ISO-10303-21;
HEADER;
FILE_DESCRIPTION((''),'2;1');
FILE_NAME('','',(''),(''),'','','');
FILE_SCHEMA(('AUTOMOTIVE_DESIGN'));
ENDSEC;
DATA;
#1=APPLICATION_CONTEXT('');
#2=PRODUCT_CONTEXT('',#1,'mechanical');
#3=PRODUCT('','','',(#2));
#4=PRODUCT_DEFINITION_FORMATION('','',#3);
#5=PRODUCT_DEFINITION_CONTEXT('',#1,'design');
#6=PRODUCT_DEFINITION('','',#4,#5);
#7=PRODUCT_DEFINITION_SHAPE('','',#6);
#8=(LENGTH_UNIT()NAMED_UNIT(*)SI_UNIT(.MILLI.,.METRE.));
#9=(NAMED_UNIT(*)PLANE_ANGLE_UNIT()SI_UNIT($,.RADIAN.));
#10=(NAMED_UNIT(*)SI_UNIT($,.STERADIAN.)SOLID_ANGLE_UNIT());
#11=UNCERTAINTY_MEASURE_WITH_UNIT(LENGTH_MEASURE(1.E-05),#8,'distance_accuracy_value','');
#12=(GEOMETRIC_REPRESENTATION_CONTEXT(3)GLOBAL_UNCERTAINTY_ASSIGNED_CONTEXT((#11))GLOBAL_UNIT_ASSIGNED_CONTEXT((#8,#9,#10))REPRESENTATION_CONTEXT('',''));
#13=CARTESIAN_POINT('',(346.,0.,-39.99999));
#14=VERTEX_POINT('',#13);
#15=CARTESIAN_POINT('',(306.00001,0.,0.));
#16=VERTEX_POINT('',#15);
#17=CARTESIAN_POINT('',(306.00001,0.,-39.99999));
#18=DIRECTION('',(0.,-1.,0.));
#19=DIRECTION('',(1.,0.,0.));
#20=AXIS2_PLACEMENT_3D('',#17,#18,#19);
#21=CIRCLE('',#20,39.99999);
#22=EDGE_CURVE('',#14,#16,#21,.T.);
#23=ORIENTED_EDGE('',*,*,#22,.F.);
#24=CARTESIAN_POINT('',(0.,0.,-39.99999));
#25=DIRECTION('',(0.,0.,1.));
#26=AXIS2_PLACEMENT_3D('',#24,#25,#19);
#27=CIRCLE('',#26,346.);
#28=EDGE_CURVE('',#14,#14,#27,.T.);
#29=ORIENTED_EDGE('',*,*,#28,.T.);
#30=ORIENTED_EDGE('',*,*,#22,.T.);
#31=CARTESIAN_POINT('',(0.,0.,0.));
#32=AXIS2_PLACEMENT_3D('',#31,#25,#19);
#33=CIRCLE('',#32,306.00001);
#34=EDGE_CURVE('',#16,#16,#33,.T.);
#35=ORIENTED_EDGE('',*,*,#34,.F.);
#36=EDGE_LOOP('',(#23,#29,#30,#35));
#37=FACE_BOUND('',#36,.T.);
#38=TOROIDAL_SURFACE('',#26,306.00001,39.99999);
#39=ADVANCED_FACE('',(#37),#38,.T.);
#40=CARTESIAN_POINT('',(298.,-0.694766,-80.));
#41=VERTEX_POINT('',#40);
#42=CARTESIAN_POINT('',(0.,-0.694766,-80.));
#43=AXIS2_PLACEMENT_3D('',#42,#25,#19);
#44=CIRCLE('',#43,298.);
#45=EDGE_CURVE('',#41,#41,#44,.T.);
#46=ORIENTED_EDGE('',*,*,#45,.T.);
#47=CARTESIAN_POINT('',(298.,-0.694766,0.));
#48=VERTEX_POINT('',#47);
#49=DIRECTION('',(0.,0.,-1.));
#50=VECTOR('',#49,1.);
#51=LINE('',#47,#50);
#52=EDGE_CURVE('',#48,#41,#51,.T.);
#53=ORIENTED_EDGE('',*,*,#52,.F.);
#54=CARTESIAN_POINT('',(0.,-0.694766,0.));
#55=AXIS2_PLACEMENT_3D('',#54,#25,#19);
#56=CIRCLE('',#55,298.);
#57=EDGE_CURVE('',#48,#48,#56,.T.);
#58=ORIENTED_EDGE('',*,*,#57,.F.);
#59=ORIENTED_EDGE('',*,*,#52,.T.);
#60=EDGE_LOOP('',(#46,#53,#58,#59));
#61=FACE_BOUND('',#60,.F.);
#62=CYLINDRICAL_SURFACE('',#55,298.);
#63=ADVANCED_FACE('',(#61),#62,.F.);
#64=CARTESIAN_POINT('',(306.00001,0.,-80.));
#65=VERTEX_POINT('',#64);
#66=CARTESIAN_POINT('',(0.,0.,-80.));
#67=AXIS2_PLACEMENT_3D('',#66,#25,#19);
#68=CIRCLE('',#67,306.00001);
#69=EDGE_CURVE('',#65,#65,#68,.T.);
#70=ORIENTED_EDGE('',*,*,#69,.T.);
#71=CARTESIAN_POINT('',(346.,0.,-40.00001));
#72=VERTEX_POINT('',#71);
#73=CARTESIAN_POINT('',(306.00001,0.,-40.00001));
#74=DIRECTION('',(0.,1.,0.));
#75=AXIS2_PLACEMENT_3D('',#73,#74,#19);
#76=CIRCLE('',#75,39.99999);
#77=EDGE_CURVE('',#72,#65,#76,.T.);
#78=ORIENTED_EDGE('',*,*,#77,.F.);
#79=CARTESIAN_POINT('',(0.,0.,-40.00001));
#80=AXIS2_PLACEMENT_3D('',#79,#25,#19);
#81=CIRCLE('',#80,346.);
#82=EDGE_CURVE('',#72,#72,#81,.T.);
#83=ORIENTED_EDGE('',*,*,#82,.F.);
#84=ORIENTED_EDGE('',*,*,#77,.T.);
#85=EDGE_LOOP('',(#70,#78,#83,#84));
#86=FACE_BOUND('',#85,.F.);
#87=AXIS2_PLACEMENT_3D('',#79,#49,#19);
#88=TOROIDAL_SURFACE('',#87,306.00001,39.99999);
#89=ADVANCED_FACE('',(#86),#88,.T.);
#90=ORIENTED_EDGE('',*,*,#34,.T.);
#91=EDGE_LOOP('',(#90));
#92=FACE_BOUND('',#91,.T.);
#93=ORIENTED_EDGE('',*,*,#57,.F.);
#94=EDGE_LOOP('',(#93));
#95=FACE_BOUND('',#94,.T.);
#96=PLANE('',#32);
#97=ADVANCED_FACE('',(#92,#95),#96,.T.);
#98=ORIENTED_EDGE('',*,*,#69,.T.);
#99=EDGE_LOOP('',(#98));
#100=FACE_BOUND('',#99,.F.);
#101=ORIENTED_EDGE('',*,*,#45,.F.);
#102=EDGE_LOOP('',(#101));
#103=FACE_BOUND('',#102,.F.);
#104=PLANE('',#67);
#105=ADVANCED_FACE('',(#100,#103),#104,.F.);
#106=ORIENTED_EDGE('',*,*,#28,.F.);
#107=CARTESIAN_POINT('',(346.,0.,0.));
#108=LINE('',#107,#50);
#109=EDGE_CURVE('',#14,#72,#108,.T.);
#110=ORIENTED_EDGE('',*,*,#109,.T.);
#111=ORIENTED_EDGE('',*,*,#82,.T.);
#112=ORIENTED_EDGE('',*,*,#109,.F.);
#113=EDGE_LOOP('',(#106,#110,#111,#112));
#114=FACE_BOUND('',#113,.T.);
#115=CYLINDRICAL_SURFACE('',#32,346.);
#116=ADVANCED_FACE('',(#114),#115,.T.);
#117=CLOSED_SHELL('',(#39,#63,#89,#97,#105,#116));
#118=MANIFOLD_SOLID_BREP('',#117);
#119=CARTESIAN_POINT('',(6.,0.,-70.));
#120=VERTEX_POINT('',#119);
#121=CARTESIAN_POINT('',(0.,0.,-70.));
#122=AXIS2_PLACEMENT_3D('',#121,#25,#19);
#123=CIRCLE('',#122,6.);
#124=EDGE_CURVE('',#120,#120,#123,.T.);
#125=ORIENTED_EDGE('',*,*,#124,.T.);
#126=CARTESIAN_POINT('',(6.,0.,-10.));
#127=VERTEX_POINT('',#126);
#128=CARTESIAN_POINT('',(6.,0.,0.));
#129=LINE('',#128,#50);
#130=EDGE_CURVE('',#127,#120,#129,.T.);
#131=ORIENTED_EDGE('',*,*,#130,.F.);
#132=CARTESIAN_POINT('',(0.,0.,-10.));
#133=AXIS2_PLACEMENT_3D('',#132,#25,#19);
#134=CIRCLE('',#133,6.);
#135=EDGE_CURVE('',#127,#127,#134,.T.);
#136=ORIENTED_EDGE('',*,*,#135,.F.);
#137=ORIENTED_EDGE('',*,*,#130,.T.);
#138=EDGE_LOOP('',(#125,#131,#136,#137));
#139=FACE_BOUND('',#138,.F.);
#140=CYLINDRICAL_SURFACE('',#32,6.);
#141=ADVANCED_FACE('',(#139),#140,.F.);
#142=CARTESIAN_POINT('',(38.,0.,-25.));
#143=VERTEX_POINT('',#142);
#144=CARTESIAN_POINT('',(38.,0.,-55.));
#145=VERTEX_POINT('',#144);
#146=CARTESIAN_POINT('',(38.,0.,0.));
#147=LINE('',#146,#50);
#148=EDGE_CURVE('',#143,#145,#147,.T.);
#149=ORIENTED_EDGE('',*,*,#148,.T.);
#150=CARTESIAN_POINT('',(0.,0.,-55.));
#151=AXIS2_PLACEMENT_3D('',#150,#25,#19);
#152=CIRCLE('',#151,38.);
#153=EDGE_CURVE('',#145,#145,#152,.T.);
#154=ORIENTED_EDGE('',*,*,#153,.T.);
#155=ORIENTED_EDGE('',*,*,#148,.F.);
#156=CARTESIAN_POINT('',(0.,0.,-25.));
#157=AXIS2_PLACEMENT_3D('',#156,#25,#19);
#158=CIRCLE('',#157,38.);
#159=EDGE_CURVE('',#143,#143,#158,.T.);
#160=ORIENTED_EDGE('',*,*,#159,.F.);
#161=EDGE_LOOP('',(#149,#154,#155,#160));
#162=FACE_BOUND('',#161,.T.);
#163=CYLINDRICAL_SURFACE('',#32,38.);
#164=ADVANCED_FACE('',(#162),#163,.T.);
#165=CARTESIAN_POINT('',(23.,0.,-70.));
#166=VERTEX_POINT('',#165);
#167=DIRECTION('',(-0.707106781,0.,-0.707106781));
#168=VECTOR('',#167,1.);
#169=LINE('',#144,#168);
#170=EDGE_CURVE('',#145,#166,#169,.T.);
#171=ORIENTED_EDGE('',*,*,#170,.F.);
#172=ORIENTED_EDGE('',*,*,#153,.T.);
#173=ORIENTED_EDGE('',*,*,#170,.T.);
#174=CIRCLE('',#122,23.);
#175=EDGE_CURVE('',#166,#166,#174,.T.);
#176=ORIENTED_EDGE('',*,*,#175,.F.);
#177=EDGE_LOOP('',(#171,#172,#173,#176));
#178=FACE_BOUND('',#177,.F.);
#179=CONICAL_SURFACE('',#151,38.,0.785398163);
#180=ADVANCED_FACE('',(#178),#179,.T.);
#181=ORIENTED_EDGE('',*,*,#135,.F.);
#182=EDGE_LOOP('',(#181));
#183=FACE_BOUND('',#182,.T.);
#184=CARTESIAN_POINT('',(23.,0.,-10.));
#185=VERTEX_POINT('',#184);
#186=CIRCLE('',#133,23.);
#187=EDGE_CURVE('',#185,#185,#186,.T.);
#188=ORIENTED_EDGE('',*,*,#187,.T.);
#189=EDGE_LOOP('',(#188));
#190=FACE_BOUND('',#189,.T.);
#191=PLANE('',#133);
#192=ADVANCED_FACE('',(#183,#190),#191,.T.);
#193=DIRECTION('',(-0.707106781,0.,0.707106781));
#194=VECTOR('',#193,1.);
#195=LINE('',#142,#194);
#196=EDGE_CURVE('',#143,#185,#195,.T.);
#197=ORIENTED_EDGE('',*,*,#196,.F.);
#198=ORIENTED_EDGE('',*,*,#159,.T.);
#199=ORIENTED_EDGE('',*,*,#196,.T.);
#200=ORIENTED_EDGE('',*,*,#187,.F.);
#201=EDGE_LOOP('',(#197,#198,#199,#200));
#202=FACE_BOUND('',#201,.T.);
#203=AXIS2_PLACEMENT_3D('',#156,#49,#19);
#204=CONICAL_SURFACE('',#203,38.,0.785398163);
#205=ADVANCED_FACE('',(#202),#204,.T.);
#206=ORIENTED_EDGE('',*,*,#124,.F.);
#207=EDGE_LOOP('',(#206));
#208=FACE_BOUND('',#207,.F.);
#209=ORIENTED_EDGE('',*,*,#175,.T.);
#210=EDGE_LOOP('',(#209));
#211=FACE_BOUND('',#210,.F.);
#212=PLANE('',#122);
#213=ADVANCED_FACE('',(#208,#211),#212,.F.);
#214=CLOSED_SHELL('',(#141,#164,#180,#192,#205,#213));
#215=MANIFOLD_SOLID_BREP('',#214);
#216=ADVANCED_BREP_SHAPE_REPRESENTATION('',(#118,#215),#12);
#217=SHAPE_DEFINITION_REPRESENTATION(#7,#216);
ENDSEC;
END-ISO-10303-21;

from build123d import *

# Parameters (mm, degrees)
F0_R     = 346
F0_R_2   = 298
F1_DEPTH = 80
F2_R     = 39.99999
F0_R_3   = 38
F0_R_4   = 6
F3_DEPTH = 70
F4_DEPTH = 10
F5_SIZE  = 15


# Not quite as in the source:
# - a fillet or chamfer is up to 0.001 mm smaller than in the source, because OpenCascade refuses the exact size


with BuildPart() as f1:
    # F0 (on Top) → F1 (new body)
    with BuildSketch(Plane.XY):
        Circle(F0_R)
        with Locations((0, -0.6947662914)):
            Circle(F0_R_2, mode=Mode.SUBTRACT)
    extrude(amount=-F1_DEPTH)

    # F2 (radius 40 in the source; OpenCascade refuses exactly that, so slightly less here)
    f2_edges = [f1.edges().sort_by_distance(p)[0] for p in [
        (-346, 0, 0),
        (-346, 0, -80),
    ]]
    fillet(f2_edges, radius=F2_R)


with BuildPart() as f3:
    # F0 (on Top) → F3 (new body)
    with BuildSketch(Plane.XY):
        Circle(F0_R_3)
        Circle(F0_R_4, mode=Mode.SUBTRACT)
    extrude(amount=-F3_DEPTH)

    # F4 (cut): a face of the model
    f4_faces = [f3.faces().sort_by_distance(p)[0] for p in [
        (-36.9251976926, 0, 0),
    ]]
    extrude(f4_faces, amount=-F4_DEPTH, mode=Mode.SUBTRACT)

    # F5
    f5_edges = [f3.edges().sort_by_distance(p)[0] for p in [
        (-38, 0, -10),
        (-38, 0, -70),
    ]]
    chamfer(f5_edges, length=F5_SIZE)


solid = Compound([f1.part, f3.part])
